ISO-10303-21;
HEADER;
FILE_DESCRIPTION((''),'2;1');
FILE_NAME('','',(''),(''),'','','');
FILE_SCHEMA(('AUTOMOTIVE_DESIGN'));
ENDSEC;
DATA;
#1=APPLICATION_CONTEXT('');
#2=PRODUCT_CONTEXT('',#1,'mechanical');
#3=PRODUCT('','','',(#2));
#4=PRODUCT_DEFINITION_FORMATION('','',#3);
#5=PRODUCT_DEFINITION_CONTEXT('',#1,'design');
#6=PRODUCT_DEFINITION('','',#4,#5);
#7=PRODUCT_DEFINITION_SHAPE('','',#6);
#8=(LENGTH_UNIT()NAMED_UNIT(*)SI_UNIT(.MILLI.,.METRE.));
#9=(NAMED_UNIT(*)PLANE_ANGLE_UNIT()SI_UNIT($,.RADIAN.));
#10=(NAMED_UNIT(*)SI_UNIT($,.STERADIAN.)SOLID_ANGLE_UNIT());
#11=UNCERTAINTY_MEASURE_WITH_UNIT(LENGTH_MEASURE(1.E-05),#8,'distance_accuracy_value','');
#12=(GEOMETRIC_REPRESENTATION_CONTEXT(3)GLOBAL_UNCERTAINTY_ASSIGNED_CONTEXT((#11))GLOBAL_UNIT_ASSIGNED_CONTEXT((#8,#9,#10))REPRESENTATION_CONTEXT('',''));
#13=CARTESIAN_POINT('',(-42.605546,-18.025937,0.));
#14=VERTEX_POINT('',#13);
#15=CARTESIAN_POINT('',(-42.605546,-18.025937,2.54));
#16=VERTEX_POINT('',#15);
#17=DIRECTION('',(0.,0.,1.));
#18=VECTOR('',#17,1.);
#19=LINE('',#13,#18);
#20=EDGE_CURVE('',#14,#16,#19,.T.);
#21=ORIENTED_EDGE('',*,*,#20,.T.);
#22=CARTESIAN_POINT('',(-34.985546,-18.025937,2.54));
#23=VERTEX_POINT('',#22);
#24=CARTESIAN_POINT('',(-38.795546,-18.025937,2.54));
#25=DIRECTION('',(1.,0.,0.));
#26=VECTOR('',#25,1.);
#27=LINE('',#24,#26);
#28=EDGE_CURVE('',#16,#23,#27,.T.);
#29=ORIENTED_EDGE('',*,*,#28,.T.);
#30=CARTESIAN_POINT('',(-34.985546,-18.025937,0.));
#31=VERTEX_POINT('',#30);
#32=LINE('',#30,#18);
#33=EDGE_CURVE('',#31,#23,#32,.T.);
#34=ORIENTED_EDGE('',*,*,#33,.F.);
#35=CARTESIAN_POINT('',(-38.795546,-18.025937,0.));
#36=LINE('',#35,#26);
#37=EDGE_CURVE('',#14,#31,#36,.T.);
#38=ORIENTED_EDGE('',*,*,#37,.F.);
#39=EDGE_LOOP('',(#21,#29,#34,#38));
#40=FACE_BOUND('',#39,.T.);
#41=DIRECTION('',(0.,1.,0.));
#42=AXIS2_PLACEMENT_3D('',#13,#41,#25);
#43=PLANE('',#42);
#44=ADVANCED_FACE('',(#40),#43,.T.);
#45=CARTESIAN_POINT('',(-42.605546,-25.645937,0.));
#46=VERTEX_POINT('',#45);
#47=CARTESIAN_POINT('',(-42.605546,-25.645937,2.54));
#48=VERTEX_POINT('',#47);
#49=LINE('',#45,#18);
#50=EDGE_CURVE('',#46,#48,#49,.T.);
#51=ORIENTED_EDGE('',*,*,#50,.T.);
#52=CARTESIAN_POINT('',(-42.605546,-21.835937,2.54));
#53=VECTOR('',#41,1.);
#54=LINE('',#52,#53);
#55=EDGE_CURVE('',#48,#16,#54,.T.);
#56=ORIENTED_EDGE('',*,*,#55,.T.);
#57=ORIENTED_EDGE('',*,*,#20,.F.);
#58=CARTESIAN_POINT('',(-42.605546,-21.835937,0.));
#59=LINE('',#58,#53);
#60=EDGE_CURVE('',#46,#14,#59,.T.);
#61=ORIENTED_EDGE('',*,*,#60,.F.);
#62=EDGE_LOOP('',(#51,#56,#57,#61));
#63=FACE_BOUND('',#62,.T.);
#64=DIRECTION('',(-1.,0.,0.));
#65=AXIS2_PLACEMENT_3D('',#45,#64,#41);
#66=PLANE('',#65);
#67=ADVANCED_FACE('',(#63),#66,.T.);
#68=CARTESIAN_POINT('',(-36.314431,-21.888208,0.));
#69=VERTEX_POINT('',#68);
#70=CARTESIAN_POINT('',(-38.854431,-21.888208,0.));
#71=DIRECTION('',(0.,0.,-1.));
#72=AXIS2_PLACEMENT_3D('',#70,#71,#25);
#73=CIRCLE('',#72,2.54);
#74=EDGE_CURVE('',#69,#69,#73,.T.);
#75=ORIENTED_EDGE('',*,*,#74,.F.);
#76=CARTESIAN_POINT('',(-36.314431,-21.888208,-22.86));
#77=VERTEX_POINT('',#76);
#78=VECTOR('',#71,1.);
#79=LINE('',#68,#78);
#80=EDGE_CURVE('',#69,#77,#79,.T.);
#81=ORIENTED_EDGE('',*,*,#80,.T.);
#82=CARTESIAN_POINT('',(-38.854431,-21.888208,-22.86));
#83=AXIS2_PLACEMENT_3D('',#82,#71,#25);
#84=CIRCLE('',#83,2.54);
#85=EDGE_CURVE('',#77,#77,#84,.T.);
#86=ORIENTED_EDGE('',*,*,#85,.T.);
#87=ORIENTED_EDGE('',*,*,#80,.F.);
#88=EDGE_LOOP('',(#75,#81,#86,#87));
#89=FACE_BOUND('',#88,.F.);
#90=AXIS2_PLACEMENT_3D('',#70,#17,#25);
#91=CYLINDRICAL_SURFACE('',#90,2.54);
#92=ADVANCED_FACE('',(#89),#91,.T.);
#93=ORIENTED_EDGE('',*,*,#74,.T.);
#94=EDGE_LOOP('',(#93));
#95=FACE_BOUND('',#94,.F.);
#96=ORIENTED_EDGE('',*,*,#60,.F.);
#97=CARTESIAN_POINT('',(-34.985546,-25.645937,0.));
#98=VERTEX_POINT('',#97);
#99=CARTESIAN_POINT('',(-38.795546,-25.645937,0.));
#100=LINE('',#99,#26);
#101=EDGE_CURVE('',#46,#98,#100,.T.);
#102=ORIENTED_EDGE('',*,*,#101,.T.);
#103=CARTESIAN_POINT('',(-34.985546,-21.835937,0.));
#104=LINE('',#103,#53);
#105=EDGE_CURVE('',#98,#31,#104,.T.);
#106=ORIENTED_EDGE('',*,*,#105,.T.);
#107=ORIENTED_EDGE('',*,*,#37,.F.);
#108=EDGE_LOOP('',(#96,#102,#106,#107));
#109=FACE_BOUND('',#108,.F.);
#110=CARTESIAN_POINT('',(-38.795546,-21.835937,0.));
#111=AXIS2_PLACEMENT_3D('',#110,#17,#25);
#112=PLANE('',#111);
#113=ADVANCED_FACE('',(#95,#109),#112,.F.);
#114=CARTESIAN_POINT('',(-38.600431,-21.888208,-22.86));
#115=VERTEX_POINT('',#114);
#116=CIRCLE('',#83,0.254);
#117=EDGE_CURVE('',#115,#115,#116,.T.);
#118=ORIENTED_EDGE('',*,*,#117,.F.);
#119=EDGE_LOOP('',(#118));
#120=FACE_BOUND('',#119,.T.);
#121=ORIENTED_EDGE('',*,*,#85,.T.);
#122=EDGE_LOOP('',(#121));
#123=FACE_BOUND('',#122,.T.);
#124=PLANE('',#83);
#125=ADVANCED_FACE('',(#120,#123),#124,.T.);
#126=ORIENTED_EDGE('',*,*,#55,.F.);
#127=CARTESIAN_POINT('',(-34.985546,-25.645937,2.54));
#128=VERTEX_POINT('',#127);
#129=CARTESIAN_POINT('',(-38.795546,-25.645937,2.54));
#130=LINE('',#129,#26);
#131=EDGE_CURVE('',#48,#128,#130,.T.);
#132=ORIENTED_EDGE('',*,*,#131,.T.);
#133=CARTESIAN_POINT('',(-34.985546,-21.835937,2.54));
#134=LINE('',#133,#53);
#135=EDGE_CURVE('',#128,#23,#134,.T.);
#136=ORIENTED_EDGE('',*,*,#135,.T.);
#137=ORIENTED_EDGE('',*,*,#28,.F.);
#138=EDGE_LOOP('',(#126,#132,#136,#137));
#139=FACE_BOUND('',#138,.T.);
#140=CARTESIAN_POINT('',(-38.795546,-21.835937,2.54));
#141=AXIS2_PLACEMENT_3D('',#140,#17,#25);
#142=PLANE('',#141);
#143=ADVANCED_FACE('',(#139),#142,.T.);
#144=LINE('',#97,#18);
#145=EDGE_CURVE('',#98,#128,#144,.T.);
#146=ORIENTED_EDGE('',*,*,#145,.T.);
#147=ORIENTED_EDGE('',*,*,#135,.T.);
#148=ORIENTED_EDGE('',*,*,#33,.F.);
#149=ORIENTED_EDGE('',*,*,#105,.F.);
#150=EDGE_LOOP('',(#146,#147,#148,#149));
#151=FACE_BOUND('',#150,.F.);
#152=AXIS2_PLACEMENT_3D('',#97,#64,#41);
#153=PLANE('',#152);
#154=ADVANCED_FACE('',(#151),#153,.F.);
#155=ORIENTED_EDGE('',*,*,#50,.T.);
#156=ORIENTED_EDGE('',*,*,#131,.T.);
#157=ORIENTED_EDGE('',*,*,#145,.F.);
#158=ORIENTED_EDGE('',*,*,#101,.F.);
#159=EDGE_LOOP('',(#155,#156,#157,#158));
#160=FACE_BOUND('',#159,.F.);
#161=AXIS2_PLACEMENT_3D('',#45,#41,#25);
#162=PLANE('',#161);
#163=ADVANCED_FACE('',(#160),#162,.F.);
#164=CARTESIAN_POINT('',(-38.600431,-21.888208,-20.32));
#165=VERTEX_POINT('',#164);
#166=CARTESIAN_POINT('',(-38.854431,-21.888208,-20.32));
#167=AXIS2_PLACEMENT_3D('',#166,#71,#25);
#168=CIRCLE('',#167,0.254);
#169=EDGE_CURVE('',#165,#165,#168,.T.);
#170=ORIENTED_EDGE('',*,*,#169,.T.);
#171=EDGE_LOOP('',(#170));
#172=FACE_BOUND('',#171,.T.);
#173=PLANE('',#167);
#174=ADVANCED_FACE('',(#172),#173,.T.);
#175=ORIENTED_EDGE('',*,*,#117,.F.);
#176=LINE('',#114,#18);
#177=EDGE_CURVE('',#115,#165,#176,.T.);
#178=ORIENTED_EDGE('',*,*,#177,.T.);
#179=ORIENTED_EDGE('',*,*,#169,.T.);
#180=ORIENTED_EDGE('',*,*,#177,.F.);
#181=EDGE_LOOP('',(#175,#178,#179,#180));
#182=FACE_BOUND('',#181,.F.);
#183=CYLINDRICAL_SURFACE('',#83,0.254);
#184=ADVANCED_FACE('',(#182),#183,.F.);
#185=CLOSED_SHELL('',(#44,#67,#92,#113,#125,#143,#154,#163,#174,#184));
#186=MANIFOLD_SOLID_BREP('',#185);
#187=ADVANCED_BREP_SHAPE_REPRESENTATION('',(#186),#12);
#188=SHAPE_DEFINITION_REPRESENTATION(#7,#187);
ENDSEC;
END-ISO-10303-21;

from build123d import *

# Parameters (mm, degrees)
F0_W     = 7.62
F0_H     = 7.62
F1_DEPTH = 2.54
F2_R     = 1.27
F3_DEPTH = 22.86
F4_R     = 0.254
F5_DEPTH = 2.54
F2_R_2   = 2.54
F6_DEPTH = 22.86


# Not quite as in the source:
# - a feature names something its author has since deleted; it is built from what else it names


with BuildPart() as f1:
    # F0 (on Top) → F1 (new body)
    with BuildSketch(Plane.XY):
        with Locations((-38.7955456972, -21.8359371471)):
            Rectangle(F0_W, F0_H)
    extrude(amount=F1_DEPTH)

    # F2 (on face) → F3 (join)
    with BuildSketch(Plane(origin=(0, 0, 0), x_dir=(1, 0, 0), z_dir=(0, 0, -1))):
        with Locations((-38.854431361, 21.8882076442)):
            Circle(F2_R)
    extrude(amount=F3_DEPTH)

    # F4 (on face) → F5 (cut)
    with BuildSketch(Plane(origin=(0, 0, -22.86), x_dir=(1, 0, 0), z_dir=(0, 0, -1))):
        with Locations((-38.854431361, 21.8882076442)):
            Circle(F4_R)
    extrude(amount=-F5_DEPTH, mode=Mode.SUBTRACT)

    # F2 (on face) → F6 (join)
    with BuildSketch(Plane(origin=(0, 0, 0), x_dir=(1, 0, 0), z_dir=(0, 0, -1))):
        with Locations((-38.854431361, 21.8882076442)):
            Circle(F2_R_2)
        with Locations((-38.854431361, 21.8882076442)):
            Circle(F2_R, mode=Mode.SUBTRACT)
    extrude(amount=F6_DEPTH)


solid = f1.part
